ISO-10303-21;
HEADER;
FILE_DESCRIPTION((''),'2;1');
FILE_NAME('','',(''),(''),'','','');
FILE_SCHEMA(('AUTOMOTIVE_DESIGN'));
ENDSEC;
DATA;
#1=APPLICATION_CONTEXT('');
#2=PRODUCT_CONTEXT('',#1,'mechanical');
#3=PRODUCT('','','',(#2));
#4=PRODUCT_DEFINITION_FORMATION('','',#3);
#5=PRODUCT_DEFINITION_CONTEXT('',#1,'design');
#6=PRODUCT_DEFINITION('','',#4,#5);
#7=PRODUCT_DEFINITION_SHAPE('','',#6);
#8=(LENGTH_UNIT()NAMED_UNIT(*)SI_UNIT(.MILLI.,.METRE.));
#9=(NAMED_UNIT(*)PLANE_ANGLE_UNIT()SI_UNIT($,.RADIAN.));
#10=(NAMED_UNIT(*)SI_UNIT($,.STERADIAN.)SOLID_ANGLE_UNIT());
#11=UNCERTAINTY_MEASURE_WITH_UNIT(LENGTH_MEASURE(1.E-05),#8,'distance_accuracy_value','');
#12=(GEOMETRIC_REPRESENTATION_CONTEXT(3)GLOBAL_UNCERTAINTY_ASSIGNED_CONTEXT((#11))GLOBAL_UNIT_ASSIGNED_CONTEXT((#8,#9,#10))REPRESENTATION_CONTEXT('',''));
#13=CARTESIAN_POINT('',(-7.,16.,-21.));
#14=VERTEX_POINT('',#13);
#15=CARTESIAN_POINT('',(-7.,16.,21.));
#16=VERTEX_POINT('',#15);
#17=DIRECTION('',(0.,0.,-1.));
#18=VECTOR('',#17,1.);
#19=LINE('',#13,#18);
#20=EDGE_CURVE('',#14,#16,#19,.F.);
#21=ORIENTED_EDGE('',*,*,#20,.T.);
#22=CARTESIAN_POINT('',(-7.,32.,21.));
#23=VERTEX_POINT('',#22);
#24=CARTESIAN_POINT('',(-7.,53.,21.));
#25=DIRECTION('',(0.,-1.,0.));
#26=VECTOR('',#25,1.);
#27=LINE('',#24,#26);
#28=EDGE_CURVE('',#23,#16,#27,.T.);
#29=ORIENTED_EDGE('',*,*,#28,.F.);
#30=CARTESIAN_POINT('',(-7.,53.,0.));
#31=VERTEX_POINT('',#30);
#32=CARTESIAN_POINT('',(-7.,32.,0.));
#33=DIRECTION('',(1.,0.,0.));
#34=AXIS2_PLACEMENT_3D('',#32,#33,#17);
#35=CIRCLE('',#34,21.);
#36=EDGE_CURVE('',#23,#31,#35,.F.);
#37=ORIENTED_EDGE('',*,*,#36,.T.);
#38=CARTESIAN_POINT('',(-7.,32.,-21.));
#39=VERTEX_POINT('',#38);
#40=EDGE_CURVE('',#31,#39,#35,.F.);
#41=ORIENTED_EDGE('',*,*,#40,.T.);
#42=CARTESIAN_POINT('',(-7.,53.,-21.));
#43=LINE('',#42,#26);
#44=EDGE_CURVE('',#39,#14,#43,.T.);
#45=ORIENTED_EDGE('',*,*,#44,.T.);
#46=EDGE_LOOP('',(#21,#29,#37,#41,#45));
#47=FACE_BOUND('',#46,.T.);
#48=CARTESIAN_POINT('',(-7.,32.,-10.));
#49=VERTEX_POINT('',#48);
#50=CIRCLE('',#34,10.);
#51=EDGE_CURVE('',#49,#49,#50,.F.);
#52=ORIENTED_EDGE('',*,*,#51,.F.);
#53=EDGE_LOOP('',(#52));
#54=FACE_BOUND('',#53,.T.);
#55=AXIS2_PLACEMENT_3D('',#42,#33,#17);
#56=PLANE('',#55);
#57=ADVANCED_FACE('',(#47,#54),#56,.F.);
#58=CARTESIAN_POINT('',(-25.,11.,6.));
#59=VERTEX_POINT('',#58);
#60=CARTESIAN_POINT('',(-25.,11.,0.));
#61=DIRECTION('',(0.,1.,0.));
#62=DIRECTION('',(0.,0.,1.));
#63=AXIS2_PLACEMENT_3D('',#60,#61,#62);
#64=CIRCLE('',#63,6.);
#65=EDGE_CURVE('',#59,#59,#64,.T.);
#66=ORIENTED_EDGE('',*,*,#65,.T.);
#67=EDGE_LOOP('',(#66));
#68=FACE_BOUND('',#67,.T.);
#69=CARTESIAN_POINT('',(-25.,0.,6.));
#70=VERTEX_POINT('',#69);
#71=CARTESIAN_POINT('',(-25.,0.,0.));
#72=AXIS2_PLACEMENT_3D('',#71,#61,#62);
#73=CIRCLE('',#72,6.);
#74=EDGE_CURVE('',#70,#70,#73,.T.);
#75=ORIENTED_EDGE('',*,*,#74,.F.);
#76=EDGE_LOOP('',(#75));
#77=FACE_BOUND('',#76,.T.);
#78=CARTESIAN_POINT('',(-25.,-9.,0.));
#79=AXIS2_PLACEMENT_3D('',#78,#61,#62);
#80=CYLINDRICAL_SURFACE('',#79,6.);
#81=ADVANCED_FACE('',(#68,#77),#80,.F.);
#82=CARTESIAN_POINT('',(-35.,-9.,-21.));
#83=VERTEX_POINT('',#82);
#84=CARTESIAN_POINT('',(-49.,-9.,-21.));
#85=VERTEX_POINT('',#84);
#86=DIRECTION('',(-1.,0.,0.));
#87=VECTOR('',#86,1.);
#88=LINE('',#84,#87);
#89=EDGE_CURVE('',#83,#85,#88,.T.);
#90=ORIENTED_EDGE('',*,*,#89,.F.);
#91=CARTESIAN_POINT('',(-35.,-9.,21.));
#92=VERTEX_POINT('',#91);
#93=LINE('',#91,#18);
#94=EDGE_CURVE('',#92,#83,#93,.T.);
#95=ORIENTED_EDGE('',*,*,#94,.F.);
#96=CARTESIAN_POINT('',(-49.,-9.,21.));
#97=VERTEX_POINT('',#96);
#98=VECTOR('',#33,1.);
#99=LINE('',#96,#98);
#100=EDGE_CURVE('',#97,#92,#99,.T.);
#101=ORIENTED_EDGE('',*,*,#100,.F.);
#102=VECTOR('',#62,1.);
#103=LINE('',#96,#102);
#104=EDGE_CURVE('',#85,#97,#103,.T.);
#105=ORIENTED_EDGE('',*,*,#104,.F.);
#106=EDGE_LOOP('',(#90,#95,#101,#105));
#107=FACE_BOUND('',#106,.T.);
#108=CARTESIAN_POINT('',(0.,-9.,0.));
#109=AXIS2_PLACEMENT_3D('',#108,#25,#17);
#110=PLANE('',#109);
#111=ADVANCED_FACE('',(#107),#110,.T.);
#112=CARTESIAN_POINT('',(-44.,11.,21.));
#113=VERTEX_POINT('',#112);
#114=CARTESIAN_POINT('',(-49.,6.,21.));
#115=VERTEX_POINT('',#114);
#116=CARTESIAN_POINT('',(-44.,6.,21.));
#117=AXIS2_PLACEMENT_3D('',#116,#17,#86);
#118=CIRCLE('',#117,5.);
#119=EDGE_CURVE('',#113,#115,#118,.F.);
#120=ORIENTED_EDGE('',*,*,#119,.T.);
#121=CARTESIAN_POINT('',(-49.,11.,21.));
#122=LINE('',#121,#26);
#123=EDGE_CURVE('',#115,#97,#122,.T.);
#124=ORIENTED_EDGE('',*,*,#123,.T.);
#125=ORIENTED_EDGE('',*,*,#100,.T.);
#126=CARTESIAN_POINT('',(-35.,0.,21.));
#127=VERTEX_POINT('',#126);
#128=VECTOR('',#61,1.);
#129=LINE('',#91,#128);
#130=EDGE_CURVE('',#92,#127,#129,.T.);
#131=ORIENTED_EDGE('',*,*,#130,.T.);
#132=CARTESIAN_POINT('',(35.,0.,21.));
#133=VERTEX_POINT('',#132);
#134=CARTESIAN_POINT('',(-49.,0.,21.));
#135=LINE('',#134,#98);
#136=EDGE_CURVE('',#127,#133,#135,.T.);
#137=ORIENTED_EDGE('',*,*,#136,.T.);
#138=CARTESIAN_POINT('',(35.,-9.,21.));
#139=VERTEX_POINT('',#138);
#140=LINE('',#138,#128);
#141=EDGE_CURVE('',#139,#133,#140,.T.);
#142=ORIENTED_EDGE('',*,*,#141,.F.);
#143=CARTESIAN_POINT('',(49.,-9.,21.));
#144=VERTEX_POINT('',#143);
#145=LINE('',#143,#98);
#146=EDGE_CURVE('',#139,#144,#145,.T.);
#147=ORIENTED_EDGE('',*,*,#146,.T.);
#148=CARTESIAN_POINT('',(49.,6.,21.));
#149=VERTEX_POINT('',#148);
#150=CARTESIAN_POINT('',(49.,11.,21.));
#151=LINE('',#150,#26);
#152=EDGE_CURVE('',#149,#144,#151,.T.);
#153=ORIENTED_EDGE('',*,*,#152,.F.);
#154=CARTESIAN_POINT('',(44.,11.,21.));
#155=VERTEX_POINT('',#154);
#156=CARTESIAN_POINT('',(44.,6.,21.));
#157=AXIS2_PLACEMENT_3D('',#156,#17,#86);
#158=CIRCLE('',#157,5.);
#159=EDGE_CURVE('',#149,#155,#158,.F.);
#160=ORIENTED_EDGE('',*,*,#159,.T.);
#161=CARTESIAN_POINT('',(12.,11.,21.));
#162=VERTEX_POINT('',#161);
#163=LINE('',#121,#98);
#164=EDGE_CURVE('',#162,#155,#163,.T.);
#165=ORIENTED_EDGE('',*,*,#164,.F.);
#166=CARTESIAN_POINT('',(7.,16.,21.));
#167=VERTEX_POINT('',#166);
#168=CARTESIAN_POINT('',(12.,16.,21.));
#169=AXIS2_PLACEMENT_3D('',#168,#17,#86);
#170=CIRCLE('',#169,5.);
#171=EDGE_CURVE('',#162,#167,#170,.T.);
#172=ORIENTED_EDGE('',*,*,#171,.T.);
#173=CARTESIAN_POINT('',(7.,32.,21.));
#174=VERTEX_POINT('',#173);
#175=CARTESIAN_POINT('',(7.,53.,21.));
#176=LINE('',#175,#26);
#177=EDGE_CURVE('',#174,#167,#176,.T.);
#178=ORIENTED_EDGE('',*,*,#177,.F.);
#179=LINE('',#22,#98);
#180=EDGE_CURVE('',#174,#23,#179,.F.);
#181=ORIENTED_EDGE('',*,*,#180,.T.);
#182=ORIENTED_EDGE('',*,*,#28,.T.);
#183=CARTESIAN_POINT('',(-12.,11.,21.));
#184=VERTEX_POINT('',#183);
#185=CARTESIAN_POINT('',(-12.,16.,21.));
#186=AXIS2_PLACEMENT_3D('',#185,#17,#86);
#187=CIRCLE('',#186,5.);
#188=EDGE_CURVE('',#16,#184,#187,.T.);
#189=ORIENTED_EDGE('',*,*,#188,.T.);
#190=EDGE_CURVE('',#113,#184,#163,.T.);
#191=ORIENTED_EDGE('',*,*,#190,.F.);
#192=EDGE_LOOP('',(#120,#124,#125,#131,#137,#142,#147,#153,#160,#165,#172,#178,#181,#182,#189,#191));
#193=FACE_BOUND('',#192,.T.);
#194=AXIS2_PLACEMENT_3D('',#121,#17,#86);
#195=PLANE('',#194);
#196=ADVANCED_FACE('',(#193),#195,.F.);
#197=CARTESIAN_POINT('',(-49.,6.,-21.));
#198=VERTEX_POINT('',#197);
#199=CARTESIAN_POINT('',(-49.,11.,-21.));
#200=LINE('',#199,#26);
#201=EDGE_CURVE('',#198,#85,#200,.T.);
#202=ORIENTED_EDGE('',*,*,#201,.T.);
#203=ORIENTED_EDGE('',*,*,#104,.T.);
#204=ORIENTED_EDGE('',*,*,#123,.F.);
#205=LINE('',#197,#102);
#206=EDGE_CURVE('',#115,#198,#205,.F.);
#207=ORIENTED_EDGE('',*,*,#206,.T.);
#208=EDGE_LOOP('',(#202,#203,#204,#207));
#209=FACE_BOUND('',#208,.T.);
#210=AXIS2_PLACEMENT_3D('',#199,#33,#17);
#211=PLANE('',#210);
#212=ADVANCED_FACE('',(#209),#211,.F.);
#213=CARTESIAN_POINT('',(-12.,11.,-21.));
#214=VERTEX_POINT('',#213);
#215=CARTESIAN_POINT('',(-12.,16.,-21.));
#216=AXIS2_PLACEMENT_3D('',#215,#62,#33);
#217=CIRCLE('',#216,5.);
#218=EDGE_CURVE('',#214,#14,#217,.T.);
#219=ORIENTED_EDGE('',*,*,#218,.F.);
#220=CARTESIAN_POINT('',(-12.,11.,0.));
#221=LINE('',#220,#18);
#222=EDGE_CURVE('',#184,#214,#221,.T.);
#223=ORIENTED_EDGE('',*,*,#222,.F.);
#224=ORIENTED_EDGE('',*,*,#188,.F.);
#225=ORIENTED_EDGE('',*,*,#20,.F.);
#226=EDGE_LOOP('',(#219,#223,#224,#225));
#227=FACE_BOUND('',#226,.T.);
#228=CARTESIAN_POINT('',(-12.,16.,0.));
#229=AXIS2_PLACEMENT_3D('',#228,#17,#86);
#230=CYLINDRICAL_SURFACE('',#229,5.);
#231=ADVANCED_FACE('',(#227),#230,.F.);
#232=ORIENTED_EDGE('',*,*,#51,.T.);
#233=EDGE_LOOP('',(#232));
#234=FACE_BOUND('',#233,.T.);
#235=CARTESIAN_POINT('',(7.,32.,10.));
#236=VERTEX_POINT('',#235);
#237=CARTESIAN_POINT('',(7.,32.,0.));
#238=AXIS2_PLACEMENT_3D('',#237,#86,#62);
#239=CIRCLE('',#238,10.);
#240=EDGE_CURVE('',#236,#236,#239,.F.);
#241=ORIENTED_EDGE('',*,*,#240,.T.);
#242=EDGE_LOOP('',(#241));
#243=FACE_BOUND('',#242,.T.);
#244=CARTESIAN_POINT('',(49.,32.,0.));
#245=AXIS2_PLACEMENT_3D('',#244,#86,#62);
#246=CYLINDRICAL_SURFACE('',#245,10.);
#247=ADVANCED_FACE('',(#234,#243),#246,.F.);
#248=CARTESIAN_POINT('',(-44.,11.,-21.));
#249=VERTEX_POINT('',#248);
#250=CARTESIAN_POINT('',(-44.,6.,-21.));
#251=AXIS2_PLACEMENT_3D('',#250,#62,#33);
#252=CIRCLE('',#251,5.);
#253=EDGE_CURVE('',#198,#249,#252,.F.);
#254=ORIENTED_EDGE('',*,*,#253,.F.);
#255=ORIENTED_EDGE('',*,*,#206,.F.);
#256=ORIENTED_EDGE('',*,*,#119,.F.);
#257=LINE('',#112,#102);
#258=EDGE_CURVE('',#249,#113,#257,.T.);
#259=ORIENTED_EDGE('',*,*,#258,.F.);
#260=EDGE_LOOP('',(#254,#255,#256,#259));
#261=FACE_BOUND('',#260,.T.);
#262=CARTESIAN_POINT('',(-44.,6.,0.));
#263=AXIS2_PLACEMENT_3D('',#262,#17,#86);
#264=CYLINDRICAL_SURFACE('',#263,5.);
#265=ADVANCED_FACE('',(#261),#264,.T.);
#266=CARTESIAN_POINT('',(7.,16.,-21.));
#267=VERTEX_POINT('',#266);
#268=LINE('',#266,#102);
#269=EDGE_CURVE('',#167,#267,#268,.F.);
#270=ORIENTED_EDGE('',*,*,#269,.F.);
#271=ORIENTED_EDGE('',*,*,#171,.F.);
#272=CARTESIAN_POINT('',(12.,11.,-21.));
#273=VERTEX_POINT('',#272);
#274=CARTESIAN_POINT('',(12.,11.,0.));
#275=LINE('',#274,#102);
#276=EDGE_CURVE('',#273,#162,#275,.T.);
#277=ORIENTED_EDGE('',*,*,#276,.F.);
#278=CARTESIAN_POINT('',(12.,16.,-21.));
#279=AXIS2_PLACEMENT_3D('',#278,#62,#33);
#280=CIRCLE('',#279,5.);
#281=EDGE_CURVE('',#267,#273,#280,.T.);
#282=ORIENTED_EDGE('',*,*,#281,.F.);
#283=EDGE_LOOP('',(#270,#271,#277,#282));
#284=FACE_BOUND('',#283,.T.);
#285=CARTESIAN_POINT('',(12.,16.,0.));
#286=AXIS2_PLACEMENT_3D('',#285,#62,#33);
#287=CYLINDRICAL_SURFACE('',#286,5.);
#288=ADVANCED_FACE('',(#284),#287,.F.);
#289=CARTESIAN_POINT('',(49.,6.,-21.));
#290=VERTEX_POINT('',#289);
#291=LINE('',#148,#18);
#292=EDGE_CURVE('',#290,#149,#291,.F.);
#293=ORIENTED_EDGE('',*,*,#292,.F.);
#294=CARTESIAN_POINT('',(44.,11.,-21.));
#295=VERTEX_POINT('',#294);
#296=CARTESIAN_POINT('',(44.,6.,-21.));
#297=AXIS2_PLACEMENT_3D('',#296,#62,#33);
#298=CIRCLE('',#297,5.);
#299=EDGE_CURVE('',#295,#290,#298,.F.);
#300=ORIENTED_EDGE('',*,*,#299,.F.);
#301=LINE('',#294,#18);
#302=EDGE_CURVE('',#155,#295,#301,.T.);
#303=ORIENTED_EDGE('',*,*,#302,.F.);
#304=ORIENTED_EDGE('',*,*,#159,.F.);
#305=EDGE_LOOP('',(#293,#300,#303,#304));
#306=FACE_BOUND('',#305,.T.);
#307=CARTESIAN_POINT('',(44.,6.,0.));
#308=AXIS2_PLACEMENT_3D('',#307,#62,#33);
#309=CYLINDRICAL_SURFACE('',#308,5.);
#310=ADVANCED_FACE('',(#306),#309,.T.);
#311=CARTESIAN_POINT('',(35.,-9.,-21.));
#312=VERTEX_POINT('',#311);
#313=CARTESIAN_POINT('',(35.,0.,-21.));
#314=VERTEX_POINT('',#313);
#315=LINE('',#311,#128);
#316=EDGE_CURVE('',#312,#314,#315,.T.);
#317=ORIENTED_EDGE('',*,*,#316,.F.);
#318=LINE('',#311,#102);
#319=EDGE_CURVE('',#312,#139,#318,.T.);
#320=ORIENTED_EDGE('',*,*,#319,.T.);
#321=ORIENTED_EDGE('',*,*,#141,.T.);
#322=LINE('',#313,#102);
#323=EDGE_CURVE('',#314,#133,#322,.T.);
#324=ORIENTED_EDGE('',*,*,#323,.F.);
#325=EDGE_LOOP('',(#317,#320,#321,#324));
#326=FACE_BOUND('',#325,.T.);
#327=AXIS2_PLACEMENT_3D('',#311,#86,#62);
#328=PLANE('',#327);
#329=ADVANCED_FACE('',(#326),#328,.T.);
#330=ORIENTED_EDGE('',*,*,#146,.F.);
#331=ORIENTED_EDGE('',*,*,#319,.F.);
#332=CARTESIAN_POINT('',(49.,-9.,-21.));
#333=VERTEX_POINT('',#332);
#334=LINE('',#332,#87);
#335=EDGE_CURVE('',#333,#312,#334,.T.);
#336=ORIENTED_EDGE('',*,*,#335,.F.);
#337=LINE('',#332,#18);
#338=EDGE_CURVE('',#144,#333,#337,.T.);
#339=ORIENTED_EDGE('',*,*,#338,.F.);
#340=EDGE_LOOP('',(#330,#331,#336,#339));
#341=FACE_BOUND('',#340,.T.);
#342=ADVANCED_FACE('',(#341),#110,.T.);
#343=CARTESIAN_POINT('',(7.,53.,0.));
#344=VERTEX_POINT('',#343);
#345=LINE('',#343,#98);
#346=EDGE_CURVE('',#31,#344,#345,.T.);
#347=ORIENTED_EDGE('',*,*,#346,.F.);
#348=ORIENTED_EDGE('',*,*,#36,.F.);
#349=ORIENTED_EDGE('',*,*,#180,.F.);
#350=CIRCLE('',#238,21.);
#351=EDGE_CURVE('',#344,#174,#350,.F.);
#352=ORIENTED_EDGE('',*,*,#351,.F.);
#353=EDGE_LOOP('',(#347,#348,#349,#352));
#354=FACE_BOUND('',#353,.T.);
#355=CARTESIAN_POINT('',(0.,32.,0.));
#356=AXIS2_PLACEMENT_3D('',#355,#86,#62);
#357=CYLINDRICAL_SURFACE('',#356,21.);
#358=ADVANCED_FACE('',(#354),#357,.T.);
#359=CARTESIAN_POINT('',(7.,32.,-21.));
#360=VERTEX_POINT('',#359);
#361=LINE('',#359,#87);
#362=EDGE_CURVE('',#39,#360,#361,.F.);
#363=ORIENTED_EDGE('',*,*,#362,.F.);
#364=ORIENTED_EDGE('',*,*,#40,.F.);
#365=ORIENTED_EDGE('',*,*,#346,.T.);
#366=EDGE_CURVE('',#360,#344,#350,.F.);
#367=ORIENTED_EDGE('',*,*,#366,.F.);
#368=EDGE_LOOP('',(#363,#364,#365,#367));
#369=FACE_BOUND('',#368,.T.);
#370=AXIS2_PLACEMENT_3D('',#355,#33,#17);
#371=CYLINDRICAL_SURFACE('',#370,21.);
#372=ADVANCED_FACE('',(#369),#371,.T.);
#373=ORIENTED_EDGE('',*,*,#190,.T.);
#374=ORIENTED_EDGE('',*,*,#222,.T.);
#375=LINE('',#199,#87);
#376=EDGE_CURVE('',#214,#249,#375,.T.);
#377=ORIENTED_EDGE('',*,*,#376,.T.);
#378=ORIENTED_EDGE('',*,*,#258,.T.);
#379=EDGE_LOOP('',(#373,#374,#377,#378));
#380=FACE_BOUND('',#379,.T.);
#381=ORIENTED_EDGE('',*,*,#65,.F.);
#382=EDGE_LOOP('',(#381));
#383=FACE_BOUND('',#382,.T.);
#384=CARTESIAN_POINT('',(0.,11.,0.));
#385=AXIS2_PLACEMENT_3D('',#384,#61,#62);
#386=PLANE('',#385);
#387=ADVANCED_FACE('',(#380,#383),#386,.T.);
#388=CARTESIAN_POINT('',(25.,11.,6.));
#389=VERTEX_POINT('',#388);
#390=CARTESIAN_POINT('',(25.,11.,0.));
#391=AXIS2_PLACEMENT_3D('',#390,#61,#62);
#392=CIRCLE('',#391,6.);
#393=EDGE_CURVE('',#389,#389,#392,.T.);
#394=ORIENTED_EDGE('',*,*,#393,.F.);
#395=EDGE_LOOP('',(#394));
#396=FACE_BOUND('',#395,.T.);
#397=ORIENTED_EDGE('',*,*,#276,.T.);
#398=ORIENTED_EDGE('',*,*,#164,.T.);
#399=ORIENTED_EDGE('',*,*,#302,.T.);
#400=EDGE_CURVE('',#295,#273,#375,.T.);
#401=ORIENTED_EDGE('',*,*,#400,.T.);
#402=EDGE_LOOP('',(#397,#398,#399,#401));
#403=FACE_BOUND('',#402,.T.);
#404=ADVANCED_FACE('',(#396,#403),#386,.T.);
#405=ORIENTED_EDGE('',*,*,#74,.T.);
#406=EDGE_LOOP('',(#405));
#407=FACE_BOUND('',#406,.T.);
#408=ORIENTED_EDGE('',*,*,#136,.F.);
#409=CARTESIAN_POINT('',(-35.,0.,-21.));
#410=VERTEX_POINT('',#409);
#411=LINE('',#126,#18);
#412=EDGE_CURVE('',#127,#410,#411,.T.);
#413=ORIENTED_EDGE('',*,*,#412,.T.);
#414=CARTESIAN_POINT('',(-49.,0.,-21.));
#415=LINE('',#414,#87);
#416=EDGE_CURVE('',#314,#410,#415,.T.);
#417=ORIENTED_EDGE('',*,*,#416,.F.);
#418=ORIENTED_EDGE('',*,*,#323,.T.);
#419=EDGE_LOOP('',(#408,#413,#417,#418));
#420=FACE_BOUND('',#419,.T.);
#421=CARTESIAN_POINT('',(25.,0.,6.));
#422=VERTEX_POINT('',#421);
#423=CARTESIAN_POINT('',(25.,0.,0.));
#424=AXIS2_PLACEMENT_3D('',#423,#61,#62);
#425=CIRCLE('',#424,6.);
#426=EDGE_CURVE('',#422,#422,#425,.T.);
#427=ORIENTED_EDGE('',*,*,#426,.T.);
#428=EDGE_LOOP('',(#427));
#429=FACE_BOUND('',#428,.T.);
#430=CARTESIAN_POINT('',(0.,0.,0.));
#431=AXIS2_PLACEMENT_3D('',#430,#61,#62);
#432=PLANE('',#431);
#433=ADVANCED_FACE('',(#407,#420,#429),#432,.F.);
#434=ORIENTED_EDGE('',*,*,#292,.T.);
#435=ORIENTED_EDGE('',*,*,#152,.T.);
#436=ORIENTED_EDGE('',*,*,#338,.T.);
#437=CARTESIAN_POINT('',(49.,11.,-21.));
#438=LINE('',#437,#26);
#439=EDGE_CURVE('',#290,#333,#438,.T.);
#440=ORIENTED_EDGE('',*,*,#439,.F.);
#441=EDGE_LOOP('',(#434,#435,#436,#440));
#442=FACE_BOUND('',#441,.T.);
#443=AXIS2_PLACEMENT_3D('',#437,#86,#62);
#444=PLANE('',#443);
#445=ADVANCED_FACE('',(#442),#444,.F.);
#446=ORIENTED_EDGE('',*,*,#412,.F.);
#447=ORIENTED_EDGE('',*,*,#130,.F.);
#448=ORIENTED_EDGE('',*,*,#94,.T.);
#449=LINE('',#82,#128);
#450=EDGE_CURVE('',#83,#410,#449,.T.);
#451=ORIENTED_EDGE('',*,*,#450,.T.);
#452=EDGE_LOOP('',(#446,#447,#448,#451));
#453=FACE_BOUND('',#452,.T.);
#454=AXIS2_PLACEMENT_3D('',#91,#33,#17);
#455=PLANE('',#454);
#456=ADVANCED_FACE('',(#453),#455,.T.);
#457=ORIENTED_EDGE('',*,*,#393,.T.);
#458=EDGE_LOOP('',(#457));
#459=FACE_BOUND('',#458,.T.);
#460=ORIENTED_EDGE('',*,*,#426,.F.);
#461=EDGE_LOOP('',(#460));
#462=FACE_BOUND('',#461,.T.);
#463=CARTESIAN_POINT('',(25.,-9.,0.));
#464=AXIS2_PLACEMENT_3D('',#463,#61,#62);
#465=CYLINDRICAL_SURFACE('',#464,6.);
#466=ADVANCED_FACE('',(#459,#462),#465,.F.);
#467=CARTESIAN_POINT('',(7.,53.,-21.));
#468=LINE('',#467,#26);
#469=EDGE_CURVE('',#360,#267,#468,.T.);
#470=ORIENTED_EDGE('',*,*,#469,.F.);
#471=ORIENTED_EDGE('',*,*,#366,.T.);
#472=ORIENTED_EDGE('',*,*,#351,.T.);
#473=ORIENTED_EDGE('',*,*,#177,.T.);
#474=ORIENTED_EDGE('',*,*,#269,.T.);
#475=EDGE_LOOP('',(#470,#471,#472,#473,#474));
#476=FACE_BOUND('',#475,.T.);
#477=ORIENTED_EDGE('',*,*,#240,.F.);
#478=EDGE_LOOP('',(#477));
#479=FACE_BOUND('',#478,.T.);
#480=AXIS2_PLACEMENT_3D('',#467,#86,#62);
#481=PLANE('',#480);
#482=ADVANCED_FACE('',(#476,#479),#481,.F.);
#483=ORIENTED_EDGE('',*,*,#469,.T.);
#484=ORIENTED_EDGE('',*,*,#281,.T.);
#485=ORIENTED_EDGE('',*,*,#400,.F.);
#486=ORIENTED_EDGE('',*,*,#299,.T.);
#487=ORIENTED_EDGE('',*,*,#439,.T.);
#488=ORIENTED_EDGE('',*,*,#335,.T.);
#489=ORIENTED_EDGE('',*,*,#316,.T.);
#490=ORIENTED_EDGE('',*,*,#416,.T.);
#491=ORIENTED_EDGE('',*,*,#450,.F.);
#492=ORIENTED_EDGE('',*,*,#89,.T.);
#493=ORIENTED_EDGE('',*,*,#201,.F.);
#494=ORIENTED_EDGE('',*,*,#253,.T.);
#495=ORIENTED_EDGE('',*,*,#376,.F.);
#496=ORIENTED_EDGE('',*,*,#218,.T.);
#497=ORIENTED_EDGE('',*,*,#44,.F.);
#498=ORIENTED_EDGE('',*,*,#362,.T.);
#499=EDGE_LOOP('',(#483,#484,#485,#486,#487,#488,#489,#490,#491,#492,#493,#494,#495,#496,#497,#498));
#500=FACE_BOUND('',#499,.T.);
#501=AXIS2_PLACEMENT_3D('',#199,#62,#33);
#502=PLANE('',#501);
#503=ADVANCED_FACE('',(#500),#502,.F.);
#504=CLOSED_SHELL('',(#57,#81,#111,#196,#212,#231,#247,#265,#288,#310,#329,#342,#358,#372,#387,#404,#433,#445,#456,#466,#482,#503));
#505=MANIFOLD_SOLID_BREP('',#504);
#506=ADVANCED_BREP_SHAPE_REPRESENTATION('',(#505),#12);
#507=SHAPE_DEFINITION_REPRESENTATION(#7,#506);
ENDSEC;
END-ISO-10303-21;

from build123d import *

# Parameters (mm, degrees)
SKETCH2_W               = 98
SKETCH2_H               = 42
BOSS_EXTRUDE1_DEPTH     = 11
SKETCH3_W               = 14
SKETCH3_H               = 42
BOSS_EXTRUDE2_DEPTH     = 9
FILLET1_R               = 5
CUT_EXTRUDE1_DEPTH      = 55.433445601
CUT_EXTRUDE1_DEPTH_BACK = 55.433445601
SKETCH4_R               = 6
SKETCH5_W               = 14
SKETCH5_H               = 42
BOSS_EXTRUDE4_DEPTH     = 53
FILLET2_R               = 21
FILLET3_R               = 5
CUT_EXTRUDE2_DEPTH      = 76.173133499
CUT_EXTRUDE2_DEPTH_BACK = 76.173133499
SKETCH6_R               = 10


with BuildPart() as part:
    # Sketch2 → Boss-Extrude1 (new body)
    with BuildSketch(Plane(origin=(0, 0, 0), x_dir=(1, 0, 0), z_dir=(0, 1, 0))):
        Rectangle(SKETCH2_W, SKETCH2_H)
    extrude(amount=BOSS_EXTRUDE1_DEPTH)

    # Sketch3 → Boss-Extrude2 (add)
    with BuildSketch(Plane(origin=(0, 0, 0), x_dir=(1, 0, 0), z_dir=(0, 1, 0))):
        with Locations((42, 0)):
            Rectangle(SKETCH3_W, SKETCH3_H)
        with Locations((-42, 0)):
            Rectangle(SKETCH3_W, SKETCH3_H)
    extrude(amount=-BOSS_EXTRUDE2_DEPTH)

    # Fillet1
    fillet1_edges = [part.edges().sort_by_distance(p)[0] for p in [
        (-49, 11, 0),
        (49, 11, 0),
    ]]
    fillet(fillet1_edges, radius=FILLET1_R)

    # Sketch4 → Cut-Extrude1 (cut, two sides: drawn at the far end of the back side and taken through both)
    with BuildSketch(Plane(origin=(0, 0, 0), x_dir=(1, 0, 0), z_dir=(0, 1, 0)).offset(-CUT_EXTRUDE1_DEPTH_BACK)):
        with Locations(Location((-25, 0, 0), (0, 0, 270))):
            Circle(SKETCH4_R)
        with Locations(Location((25, 0, 0), (0, 0, 270))):
            Circle(SKETCH4_R)
    extrude(amount=CUT_EXTRUDE1_DEPTH + CUT_EXTRUDE1_DEPTH_BACK, mode=Mode.SUBTRACT)

    # Sketch5 → Boss-Extrude4 (add)
    with BuildSketch(Plane(origin=(0, 0, 0), x_dir=(1, 0, 0), z_dir=(0, 1, 0))):
        Rectangle(SKETCH5_W, SKETCH5_H)
    extrude(amount=BOSS_EXTRUDE4_DEPTH)

    # Fillet2
    fillet2_edges = [part.edges().sort_by_distance(p)[0] for p in [
        (0, 53, -21),
        (0, 53, 21),
    ]]
    fillet(fillet2_edges, radius=FILLET2_R - 0.0001)  # a hair under: the kernel refuses the full size

    # Fillet3
    fillet3_edges = [part.edges().sort_by_distance(p)[0] for p in [
        (7, 11, 0),
        (-7, 11, 0),
    ]]
    fillet(fillet3_edges, radius=FILLET3_R)

    # Sketch6 → Cut-Extrude2 (cut, two sides: drawn at the far end of the back side and taken through both)
    with BuildSketch(Plane(origin=(0, 0, 0), x_dir=(0, 0, -1), z_dir=(1, 0, 0)).offset(-CUT_EXTRUDE2_DEPTH_BACK)):
        with Locations(Location((0, 32, 0), (0, 0, 180))):
            Circle(SKETCH6_R)
    extrude(amount=CUT_EXTRUDE2_DEPTH + CUT_EXTRUDE2_DEPTH_BACK, mode=Mode.SUBTRACT)


solid = part.part
